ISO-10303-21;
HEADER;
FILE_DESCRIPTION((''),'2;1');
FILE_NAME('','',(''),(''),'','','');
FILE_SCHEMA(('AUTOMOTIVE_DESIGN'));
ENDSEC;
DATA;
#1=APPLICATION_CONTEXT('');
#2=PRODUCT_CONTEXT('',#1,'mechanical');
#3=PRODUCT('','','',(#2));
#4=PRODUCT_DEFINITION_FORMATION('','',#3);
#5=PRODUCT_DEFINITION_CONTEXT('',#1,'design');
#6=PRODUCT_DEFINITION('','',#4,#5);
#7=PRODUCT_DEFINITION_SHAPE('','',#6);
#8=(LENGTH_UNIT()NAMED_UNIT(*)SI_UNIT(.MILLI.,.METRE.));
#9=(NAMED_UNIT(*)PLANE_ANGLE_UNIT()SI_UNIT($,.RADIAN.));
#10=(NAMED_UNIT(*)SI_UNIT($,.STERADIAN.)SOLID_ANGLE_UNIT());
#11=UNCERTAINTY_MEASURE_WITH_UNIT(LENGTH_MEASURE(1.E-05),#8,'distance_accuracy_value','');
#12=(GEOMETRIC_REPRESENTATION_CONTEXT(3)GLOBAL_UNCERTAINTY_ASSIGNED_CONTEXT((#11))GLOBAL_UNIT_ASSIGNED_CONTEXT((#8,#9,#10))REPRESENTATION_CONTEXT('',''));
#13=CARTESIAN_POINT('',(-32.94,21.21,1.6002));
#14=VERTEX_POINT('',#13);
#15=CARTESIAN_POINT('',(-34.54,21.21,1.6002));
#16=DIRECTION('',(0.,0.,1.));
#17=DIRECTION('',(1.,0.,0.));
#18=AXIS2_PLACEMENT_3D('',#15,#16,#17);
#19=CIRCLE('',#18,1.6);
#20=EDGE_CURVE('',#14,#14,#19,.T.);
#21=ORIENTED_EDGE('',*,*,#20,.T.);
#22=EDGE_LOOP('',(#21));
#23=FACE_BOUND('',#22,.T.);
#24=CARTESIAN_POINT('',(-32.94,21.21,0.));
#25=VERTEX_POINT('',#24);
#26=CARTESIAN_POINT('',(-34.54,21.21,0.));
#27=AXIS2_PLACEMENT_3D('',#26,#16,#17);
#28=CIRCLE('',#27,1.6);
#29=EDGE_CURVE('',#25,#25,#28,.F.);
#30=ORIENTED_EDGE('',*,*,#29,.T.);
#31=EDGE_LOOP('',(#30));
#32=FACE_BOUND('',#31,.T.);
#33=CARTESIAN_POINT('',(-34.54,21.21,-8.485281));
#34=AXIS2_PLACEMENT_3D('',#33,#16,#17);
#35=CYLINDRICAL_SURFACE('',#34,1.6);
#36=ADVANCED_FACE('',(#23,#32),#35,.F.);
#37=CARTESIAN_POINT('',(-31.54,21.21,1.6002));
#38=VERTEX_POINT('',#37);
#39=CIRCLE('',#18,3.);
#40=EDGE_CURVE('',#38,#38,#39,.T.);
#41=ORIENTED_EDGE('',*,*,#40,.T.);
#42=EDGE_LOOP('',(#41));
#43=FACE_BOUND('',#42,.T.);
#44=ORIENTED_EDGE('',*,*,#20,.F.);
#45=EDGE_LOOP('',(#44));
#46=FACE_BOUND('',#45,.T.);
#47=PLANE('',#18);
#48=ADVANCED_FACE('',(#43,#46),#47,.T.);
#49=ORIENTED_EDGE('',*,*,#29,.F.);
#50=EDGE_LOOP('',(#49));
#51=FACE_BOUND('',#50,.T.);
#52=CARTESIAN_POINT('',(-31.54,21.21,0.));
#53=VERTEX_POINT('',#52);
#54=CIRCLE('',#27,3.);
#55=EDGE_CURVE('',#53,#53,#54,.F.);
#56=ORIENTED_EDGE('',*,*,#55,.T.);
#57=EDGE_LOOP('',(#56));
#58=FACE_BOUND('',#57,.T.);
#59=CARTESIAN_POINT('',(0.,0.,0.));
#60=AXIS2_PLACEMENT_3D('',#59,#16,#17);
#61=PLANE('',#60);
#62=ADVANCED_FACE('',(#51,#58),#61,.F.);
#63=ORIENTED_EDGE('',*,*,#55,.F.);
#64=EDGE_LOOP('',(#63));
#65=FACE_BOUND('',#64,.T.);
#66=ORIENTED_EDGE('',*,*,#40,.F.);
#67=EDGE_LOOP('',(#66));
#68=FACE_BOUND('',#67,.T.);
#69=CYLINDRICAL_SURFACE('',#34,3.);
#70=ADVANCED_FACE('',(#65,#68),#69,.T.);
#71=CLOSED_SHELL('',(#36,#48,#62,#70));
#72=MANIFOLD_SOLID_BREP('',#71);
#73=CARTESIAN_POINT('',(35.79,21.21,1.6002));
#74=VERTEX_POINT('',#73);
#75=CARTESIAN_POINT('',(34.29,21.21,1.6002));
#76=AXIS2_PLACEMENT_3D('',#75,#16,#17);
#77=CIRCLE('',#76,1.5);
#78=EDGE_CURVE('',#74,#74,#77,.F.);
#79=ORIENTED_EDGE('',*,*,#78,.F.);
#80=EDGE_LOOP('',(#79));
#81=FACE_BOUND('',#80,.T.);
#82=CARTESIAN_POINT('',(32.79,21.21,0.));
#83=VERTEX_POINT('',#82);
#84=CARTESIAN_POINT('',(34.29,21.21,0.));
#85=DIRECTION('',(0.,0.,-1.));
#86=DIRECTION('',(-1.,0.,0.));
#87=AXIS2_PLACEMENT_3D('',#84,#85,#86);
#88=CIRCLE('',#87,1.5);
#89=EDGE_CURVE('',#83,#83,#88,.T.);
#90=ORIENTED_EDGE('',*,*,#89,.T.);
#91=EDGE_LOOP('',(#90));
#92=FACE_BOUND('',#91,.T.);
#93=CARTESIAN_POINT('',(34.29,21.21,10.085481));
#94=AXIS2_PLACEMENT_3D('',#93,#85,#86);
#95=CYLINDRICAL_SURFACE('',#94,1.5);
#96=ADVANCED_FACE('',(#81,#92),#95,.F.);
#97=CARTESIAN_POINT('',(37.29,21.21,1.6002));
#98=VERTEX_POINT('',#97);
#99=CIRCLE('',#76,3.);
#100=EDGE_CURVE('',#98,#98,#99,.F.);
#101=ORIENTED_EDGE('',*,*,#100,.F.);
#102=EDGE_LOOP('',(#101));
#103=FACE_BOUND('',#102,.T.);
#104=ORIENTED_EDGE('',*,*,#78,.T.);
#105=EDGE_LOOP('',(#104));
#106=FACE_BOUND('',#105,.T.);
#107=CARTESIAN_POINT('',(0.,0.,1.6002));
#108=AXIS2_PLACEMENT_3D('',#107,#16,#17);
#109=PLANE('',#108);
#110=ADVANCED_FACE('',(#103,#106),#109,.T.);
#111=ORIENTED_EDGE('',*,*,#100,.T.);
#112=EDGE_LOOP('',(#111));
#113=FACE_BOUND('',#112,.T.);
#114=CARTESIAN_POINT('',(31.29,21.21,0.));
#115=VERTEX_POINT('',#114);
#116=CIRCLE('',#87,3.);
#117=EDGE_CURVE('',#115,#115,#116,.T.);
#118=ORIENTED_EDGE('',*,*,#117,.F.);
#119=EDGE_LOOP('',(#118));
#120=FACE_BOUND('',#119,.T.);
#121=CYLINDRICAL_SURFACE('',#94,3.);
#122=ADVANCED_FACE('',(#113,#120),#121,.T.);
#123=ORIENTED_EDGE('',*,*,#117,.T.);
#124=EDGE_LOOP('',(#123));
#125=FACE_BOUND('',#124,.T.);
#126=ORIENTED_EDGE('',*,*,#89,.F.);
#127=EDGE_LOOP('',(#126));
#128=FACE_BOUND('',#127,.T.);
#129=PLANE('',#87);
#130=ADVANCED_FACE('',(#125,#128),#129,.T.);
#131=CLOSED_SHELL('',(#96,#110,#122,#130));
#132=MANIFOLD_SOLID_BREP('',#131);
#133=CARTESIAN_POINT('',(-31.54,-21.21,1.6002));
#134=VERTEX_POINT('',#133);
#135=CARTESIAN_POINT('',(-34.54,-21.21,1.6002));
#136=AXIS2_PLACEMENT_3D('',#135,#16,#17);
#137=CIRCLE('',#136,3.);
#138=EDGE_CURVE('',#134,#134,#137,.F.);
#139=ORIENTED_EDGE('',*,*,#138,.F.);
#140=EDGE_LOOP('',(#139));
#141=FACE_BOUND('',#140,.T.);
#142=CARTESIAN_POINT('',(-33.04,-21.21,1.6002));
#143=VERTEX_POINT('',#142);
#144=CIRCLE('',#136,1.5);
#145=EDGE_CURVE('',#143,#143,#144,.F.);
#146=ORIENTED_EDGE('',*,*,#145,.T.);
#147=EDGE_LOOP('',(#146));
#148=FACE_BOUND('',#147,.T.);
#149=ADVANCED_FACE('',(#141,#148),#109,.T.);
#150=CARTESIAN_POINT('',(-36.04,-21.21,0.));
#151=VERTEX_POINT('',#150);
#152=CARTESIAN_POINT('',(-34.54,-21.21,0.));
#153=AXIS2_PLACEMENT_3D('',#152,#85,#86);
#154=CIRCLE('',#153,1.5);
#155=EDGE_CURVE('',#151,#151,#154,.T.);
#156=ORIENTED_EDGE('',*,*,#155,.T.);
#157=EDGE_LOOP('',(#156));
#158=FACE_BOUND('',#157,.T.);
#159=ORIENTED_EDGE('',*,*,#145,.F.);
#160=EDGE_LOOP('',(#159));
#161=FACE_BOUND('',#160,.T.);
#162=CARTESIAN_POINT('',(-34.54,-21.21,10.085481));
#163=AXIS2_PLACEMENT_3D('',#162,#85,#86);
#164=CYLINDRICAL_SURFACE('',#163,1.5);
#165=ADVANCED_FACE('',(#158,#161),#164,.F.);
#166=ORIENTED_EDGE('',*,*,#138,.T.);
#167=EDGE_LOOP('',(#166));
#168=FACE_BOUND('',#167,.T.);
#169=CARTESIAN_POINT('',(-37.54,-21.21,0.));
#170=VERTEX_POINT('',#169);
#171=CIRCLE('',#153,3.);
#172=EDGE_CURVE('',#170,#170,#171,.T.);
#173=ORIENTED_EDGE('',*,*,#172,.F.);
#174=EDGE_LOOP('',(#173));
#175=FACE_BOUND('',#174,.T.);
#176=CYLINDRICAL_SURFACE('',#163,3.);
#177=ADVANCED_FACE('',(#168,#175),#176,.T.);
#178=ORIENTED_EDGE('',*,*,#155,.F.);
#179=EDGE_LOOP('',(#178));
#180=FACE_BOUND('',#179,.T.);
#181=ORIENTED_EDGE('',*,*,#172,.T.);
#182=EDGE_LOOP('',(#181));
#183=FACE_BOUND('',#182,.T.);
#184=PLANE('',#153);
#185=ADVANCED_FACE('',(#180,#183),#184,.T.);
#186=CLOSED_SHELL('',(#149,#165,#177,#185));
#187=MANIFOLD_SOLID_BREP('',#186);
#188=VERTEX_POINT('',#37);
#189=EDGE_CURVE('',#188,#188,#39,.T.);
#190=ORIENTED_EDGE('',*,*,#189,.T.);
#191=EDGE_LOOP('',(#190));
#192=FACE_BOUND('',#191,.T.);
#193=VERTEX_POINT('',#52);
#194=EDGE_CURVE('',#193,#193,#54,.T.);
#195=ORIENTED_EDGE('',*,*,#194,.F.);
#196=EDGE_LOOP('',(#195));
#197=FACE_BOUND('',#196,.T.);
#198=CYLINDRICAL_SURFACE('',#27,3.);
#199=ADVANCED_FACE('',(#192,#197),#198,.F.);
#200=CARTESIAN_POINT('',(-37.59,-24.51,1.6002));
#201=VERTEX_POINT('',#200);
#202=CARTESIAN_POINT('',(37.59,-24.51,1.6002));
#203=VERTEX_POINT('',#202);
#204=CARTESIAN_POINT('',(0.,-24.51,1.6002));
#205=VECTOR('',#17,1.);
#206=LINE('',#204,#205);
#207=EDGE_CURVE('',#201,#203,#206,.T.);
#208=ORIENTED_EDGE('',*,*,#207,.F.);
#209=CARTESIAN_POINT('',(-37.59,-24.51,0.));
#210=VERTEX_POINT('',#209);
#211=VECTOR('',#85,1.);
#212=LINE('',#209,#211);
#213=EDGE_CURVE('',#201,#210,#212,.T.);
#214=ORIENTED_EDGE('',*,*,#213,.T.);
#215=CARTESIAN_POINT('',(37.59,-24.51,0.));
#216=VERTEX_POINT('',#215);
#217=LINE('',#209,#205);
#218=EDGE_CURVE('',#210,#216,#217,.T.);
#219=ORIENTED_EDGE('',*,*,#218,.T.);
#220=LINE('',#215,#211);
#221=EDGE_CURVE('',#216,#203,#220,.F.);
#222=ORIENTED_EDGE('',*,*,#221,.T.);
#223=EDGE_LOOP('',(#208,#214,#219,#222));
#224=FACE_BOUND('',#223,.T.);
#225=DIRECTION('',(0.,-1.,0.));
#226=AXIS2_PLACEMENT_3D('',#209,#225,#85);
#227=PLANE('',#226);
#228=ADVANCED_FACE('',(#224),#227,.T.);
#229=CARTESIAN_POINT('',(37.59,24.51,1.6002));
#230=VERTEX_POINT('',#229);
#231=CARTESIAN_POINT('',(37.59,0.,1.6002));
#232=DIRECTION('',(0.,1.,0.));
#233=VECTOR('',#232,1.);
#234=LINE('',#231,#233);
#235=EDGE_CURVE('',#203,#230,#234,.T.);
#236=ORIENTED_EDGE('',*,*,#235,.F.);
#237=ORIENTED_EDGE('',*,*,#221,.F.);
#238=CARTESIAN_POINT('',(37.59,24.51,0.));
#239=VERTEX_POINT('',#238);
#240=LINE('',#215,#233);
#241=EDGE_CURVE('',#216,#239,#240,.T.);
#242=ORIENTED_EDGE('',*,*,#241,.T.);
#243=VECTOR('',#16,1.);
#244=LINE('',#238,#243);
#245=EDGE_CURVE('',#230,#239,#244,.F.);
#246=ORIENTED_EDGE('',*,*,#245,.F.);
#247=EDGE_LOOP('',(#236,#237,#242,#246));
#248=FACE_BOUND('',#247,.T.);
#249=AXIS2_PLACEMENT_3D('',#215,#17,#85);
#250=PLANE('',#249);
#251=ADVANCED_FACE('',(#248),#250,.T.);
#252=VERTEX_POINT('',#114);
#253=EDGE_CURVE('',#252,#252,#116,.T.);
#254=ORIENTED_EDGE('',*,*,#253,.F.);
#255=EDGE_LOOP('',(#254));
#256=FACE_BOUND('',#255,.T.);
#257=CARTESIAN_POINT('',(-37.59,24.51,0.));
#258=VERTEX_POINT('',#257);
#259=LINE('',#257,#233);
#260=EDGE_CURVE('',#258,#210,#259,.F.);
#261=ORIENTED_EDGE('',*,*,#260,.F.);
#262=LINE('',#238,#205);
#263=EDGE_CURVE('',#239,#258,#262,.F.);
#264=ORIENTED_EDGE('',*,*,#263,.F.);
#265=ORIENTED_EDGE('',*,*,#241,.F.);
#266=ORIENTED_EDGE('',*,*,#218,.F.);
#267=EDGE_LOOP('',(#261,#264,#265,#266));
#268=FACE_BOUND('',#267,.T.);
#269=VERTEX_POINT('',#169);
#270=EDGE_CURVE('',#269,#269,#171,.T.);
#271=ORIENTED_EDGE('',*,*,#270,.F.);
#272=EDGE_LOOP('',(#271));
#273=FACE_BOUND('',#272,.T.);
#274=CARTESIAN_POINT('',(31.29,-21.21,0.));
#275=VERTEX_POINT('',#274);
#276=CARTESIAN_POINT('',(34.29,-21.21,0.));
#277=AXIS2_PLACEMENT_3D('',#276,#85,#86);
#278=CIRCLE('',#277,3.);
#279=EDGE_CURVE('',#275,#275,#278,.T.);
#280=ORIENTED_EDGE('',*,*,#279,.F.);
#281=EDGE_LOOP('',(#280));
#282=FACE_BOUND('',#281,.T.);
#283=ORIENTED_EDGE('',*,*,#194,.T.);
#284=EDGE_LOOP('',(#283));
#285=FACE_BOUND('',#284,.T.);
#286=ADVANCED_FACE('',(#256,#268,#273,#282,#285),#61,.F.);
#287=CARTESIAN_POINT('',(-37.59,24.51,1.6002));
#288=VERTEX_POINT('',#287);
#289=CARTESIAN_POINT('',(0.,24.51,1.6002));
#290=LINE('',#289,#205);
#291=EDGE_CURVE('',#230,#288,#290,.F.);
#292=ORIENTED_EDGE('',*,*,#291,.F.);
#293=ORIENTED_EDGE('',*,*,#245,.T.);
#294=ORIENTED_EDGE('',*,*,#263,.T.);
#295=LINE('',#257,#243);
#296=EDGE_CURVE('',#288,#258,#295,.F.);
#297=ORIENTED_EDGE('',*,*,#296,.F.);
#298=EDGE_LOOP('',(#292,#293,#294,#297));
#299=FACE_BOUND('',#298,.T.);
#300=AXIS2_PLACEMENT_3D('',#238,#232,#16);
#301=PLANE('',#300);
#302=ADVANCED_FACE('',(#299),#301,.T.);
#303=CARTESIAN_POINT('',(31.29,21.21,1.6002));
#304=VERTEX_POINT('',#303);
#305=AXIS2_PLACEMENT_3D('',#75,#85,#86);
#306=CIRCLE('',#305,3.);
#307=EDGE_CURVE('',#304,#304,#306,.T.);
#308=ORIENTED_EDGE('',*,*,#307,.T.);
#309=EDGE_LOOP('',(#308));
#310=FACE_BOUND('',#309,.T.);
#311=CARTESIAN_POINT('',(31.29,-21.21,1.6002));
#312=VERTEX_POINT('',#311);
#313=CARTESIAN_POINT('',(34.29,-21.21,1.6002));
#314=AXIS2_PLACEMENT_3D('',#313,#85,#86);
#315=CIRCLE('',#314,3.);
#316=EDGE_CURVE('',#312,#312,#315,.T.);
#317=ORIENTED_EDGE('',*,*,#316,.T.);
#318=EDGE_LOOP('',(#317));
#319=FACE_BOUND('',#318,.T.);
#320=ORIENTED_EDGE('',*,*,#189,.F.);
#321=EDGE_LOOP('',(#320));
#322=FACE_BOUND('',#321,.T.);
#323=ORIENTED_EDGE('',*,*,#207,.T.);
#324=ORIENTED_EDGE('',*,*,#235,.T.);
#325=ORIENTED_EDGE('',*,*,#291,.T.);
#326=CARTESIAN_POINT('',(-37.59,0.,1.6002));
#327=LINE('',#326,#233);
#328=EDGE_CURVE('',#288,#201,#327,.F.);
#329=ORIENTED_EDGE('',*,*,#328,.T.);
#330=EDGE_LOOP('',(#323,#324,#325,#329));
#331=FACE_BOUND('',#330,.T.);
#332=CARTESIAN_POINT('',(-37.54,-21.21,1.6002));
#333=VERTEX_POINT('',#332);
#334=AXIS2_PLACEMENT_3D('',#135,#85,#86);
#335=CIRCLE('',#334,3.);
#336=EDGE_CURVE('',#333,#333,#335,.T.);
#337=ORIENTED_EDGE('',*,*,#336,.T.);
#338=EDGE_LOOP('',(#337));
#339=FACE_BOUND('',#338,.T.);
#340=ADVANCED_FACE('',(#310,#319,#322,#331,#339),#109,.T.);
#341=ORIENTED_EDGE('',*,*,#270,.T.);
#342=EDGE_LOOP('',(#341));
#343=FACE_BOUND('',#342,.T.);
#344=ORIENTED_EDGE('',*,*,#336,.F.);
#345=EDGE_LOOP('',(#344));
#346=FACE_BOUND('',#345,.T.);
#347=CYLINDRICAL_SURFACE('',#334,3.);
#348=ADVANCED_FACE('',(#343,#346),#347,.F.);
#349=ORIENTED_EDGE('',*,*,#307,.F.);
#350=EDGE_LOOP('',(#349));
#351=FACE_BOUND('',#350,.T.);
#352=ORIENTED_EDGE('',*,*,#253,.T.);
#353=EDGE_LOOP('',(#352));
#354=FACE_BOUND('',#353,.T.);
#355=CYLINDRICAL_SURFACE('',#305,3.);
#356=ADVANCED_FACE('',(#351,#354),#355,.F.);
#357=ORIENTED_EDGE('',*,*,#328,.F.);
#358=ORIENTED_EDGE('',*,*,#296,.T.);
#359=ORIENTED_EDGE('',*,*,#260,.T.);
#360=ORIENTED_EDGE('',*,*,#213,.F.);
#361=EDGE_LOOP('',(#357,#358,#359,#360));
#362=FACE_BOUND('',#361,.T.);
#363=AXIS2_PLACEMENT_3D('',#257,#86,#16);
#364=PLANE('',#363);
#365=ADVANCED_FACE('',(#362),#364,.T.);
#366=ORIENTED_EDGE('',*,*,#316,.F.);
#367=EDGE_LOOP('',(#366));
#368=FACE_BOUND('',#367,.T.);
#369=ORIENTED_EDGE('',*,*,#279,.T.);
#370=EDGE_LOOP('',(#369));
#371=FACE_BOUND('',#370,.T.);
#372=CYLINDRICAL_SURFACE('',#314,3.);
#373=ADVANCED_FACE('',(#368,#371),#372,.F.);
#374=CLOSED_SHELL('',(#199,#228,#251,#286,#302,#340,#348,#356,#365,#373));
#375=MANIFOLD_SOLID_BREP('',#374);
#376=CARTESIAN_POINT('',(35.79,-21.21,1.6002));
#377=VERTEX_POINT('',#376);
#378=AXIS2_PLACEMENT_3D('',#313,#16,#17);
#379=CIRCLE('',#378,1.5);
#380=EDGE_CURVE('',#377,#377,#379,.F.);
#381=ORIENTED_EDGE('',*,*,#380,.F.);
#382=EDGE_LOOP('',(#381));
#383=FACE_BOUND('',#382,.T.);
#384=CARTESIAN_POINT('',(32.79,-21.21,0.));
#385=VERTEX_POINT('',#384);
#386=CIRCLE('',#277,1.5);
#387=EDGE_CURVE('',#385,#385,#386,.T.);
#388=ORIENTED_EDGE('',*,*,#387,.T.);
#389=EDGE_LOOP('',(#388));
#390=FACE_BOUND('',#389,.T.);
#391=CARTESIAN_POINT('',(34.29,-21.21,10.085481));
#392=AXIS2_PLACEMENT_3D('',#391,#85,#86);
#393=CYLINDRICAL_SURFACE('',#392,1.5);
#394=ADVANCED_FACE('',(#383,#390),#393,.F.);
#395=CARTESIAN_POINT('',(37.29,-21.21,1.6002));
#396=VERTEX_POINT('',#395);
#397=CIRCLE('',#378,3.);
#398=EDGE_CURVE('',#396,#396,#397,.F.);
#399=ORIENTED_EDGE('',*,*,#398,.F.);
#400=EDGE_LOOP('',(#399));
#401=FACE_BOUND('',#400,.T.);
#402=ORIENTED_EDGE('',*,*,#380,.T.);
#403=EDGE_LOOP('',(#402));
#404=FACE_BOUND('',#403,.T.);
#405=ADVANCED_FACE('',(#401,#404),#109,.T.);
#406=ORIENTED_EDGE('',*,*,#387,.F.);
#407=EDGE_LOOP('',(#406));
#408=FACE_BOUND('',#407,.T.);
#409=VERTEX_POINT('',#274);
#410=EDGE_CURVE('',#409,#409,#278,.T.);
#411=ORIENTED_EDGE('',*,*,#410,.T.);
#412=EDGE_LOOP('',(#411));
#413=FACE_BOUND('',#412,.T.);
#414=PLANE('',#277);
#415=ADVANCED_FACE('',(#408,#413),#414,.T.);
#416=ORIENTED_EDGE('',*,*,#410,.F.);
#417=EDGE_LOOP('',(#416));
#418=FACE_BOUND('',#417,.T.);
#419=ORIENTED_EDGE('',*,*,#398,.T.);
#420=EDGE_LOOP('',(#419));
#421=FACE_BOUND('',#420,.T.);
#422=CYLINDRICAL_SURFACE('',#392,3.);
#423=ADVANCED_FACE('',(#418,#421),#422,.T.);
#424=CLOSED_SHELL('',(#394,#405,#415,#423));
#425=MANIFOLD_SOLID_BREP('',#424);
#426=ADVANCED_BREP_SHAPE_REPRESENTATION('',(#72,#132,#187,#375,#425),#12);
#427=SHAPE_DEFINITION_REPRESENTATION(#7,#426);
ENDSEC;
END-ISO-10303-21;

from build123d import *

# Parameters (mm, degrees)
CUT_EXTRUDE1_START       = -1.6002
CUT_EXTRUDE1_OUTLINE_W   = 75.18
CUT_EXTRUDE1_OUTLINE_H   = 49.02
CUT_EXTRUDE1_OUTLINE_R   = 1.6
CUT_EXTRUDE1_OUTLINE_R_2 = 3
CUT_EXTRUDE1_DEPTH       = 1.6002
SKETCH3_R                = 3
SKETCH3_R_2              = 1.6
BOSS_EXTRUDE2_DEPTH      = 1.6002
SKETCH4_R                = 3
CUT_EXTRUDE2_DEPTH       = 45.903327717
SKETCH7_R                = 3
SKETCH7_R_2              = 1.5
BOSS_EXTRUDE4_DEPTH      = 1.6002
SKETCH8_R                = 3
SKETCH8_R_2              = 1.5
BOSS_EXTRUDE5_DEPTH      = 1.6002
SKETCH9_R                = 3
SKETCH9_R_2              = 1.5
BOSS_EXTRUDE6_DEPTH      = 1.6002


with BuildPart() as part:
    # Cut-Extrude1: read off the stored shape, not the designer's step
    # Cut-Extrude1 outline → Cut-Extrude1 (new body)
    with BuildSketch(Plane.XY.offset(1.6002).offset(CUT_EXTRUDE1_START)):
        Rectangle(CUT_EXTRUDE1_OUTLINE_W, CUT_EXTRUDE1_OUTLINE_H)
        with Locations((-34.54, -21.21)):
            Circle(CUT_EXTRUDE1_OUTLINE_R, mode=Mode.SUBTRACT)
        with Locations((34.29, -21.21)):
            Circle(CUT_EXTRUDE1_OUTLINE_R, mode=Mode.SUBTRACT)
        with Locations((-34.54, 21.21)):
            Circle(CUT_EXTRUDE1_OUTLINE_R_2, mode=Mode.SUBTRACT)
        with Locations((34.29, 21.21)):
            Circle(CUT_EXTRUDE1_OUTLINE_R, mode=Mode.SUBTRACT)
    extrude(amount=CUT_EXTRUDE1_DEPTH)

    # Sketch4 → Cut-Extrude2 (cut, through all)
    with BuildSketch(Plane(origin=(0, 0, 0), x_dir=(-1, 0, 0), z_dir=(0, 0, -1))):
        with Locations((34.54, -21.21)):
            Circle(SKETCH4_R)
        with Locations((-34.29, -21.21)):
            Circle(SKETCH4_R)
        with Locations((-34.29, 21.21)):
            Circle(SKETCH4_R)
    extrude(amount=-CUT_EXTRUDE2_DEPTH, mode=Mode.SUBTRACT)


with BuildPart() as body_2:
    # Sketch3 → Boss-Extrude2 (new body)
    with BuildSketch(Plane.XY.offset(1.6002)):
        with Locations((-34.54, 21.21)):
            Circle(SKETCH3_R)
        with Locations((-34.54, 21.21)):
            Circle(SKETCH3_R_2, mode=Mode.SUBTRACT)
    extrude(amount=-BOSS_EXTRUDE2_DEPTH)


with BuildPart() as body_3:
    # Sketch7 → Boss-Extrude4 (new body)
    with BuildSketch(Plane(origin=(0, 0, 0), x_dir=(-1, 0, 0), z_dir=(0, 0, -1))):
        with Locations((-34.29, 21.21)):
            Circle(SKETCH7_R)
        with Locations((-34.29, 21.21)):
            Circle(SKETCH7_R_2, mode=Mode.SUBTRACT)
    extrude(amount=-BOSS_EXTRUDE4_DEPTH)


with BuildPart() as body_4:
    # Sketch8 → Boss-Extrude5 (new body)
    with BuildSketch(Plane(origin=(0, 0, 0), x_dir=(-1, 0, 0), z_dir=(0, 0, -1))):
        with Locations((-34.29, -21.21)):
            Circle(SKETCH8_R)
        with Locations((-34.29, -21.21)):
            Circle(SKETCH8_R_2, mode=Mode.SUBTRACT)
    extrude(amount=-BOSS_EXTRUDE5_DEPTH)


with BuildPart() as body_5:
    # Sketch9 → Boss-Extrude6 (new body)
    with BuildSketch(Plane(origin=(0, 0, 0), x_dir=(-1, 0, 0), z_dir=(0, 0, -1))):
        with Locations((34.54, -21.21)):
            Circle(SKETCH9_R)
        with Locations((34.54, -21.21)):
            Circle(SKETCH9_R_2, mode=Mode.SUBTRACT)
    extrude(amount=-BOSS_EXTRUDE6_DEPTH)


solid = Compound([part.part, body_2.part, body_3.part, body_4.part, body_5.part])
